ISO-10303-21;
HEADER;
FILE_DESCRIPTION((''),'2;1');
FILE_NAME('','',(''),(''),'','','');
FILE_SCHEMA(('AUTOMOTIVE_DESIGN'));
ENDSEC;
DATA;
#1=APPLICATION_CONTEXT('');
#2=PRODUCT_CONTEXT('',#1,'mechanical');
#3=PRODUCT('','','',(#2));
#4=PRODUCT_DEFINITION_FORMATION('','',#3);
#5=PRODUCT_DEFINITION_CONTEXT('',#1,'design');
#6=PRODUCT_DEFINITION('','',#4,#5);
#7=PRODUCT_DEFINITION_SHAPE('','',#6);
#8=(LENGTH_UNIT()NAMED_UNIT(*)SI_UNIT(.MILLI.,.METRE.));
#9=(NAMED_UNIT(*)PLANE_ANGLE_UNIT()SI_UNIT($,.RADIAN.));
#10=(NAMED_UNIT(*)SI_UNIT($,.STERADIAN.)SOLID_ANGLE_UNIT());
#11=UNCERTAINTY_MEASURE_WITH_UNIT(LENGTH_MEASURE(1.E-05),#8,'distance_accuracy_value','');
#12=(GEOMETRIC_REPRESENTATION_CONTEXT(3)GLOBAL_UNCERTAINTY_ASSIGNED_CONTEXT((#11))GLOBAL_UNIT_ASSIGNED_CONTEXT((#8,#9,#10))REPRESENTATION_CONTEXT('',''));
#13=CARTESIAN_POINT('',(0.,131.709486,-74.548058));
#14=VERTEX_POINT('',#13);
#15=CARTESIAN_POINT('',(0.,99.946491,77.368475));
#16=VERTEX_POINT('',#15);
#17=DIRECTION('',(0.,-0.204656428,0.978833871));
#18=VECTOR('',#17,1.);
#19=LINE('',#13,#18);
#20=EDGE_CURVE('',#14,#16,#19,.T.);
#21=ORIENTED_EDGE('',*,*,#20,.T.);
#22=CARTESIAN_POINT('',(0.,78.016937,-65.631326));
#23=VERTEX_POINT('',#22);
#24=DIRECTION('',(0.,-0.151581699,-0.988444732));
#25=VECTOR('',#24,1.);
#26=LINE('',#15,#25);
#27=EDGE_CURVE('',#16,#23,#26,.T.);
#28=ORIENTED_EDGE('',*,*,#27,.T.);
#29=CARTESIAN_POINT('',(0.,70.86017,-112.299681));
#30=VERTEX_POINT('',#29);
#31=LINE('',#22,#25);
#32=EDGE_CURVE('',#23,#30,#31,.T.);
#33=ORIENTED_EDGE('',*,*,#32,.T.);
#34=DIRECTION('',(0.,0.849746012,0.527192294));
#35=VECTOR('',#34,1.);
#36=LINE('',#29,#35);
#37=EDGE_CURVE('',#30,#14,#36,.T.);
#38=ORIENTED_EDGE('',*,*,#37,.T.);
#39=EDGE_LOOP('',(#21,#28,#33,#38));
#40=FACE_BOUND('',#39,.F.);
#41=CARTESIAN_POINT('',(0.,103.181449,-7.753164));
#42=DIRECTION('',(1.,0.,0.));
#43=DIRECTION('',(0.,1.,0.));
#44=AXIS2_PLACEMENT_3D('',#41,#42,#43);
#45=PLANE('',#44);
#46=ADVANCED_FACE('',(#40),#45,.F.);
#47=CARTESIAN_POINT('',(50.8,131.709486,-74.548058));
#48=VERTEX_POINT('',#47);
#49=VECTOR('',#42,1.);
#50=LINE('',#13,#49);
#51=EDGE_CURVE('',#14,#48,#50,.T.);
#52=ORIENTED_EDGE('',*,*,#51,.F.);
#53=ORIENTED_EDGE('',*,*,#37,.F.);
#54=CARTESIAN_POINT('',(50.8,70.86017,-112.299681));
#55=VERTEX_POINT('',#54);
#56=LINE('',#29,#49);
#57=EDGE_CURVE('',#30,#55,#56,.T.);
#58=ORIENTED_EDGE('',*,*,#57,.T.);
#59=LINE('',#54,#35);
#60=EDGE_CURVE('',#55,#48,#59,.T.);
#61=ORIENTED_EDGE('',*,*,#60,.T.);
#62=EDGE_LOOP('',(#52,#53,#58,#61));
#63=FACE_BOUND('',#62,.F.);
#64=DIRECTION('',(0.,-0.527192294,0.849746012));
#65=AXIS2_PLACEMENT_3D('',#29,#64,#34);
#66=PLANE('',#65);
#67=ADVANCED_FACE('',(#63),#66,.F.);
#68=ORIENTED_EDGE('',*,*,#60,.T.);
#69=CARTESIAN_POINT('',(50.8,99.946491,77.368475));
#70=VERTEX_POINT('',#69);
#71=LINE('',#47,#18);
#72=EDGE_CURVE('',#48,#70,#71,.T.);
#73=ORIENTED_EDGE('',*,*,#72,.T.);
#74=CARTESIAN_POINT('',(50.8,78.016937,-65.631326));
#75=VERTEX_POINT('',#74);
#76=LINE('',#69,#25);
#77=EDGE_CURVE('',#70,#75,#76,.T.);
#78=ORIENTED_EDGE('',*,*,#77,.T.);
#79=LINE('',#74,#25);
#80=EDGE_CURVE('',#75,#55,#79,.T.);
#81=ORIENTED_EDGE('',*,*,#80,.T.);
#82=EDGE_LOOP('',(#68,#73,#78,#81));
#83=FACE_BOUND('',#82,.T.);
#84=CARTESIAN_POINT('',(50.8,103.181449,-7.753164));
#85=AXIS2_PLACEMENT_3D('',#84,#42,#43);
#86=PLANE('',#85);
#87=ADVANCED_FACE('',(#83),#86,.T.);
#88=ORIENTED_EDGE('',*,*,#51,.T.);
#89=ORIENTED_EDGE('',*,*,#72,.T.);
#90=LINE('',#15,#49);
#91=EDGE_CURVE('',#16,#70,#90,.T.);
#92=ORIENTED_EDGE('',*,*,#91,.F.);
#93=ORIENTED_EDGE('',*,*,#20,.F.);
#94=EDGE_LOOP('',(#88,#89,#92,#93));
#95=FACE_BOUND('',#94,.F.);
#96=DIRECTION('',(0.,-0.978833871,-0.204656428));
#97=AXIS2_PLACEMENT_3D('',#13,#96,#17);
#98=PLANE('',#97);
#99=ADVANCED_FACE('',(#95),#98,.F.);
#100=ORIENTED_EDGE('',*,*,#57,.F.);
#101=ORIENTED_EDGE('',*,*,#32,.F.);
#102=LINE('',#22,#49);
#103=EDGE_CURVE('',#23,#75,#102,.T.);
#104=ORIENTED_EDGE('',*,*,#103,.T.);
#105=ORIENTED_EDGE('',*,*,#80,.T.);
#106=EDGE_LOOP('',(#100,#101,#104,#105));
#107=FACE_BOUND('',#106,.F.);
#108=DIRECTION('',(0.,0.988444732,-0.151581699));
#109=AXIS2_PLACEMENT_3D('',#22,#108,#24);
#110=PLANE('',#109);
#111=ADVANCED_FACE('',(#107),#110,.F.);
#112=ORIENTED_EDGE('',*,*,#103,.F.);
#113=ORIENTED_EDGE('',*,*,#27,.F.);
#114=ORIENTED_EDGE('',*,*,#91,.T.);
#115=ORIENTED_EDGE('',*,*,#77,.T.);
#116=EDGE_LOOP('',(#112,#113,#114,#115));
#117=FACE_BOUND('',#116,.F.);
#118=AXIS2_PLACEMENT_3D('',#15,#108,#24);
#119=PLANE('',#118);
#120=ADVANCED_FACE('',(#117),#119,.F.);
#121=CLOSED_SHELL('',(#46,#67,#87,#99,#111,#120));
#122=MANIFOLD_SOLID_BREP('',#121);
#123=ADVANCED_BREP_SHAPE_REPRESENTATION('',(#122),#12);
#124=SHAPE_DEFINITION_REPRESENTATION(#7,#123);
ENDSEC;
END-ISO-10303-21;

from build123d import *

# Parameters (mm, degrees)
F1_DEPTH = 50.8


# Not quite as in the source:
# - a feature names something its author has since deleted; it is built from what else it names


with BuildPart() as f1:
    # F0 (on Right) → F1 (new body)
    with BuildSketch(Plane.YZ):
        Polygon((99.9464914203, 77.3684754968), (78.0169366286, -65.6313263369), (131.7094862461, -74.5480582118), align=None)
        Polygon((131.7094862461, -74.5480582118), (78.0169366286, -65.6313263369), (70.8601698279, -112.2996807098), align=None)
    extrude(amount=F1_DEPTH)


solid = f1.part
